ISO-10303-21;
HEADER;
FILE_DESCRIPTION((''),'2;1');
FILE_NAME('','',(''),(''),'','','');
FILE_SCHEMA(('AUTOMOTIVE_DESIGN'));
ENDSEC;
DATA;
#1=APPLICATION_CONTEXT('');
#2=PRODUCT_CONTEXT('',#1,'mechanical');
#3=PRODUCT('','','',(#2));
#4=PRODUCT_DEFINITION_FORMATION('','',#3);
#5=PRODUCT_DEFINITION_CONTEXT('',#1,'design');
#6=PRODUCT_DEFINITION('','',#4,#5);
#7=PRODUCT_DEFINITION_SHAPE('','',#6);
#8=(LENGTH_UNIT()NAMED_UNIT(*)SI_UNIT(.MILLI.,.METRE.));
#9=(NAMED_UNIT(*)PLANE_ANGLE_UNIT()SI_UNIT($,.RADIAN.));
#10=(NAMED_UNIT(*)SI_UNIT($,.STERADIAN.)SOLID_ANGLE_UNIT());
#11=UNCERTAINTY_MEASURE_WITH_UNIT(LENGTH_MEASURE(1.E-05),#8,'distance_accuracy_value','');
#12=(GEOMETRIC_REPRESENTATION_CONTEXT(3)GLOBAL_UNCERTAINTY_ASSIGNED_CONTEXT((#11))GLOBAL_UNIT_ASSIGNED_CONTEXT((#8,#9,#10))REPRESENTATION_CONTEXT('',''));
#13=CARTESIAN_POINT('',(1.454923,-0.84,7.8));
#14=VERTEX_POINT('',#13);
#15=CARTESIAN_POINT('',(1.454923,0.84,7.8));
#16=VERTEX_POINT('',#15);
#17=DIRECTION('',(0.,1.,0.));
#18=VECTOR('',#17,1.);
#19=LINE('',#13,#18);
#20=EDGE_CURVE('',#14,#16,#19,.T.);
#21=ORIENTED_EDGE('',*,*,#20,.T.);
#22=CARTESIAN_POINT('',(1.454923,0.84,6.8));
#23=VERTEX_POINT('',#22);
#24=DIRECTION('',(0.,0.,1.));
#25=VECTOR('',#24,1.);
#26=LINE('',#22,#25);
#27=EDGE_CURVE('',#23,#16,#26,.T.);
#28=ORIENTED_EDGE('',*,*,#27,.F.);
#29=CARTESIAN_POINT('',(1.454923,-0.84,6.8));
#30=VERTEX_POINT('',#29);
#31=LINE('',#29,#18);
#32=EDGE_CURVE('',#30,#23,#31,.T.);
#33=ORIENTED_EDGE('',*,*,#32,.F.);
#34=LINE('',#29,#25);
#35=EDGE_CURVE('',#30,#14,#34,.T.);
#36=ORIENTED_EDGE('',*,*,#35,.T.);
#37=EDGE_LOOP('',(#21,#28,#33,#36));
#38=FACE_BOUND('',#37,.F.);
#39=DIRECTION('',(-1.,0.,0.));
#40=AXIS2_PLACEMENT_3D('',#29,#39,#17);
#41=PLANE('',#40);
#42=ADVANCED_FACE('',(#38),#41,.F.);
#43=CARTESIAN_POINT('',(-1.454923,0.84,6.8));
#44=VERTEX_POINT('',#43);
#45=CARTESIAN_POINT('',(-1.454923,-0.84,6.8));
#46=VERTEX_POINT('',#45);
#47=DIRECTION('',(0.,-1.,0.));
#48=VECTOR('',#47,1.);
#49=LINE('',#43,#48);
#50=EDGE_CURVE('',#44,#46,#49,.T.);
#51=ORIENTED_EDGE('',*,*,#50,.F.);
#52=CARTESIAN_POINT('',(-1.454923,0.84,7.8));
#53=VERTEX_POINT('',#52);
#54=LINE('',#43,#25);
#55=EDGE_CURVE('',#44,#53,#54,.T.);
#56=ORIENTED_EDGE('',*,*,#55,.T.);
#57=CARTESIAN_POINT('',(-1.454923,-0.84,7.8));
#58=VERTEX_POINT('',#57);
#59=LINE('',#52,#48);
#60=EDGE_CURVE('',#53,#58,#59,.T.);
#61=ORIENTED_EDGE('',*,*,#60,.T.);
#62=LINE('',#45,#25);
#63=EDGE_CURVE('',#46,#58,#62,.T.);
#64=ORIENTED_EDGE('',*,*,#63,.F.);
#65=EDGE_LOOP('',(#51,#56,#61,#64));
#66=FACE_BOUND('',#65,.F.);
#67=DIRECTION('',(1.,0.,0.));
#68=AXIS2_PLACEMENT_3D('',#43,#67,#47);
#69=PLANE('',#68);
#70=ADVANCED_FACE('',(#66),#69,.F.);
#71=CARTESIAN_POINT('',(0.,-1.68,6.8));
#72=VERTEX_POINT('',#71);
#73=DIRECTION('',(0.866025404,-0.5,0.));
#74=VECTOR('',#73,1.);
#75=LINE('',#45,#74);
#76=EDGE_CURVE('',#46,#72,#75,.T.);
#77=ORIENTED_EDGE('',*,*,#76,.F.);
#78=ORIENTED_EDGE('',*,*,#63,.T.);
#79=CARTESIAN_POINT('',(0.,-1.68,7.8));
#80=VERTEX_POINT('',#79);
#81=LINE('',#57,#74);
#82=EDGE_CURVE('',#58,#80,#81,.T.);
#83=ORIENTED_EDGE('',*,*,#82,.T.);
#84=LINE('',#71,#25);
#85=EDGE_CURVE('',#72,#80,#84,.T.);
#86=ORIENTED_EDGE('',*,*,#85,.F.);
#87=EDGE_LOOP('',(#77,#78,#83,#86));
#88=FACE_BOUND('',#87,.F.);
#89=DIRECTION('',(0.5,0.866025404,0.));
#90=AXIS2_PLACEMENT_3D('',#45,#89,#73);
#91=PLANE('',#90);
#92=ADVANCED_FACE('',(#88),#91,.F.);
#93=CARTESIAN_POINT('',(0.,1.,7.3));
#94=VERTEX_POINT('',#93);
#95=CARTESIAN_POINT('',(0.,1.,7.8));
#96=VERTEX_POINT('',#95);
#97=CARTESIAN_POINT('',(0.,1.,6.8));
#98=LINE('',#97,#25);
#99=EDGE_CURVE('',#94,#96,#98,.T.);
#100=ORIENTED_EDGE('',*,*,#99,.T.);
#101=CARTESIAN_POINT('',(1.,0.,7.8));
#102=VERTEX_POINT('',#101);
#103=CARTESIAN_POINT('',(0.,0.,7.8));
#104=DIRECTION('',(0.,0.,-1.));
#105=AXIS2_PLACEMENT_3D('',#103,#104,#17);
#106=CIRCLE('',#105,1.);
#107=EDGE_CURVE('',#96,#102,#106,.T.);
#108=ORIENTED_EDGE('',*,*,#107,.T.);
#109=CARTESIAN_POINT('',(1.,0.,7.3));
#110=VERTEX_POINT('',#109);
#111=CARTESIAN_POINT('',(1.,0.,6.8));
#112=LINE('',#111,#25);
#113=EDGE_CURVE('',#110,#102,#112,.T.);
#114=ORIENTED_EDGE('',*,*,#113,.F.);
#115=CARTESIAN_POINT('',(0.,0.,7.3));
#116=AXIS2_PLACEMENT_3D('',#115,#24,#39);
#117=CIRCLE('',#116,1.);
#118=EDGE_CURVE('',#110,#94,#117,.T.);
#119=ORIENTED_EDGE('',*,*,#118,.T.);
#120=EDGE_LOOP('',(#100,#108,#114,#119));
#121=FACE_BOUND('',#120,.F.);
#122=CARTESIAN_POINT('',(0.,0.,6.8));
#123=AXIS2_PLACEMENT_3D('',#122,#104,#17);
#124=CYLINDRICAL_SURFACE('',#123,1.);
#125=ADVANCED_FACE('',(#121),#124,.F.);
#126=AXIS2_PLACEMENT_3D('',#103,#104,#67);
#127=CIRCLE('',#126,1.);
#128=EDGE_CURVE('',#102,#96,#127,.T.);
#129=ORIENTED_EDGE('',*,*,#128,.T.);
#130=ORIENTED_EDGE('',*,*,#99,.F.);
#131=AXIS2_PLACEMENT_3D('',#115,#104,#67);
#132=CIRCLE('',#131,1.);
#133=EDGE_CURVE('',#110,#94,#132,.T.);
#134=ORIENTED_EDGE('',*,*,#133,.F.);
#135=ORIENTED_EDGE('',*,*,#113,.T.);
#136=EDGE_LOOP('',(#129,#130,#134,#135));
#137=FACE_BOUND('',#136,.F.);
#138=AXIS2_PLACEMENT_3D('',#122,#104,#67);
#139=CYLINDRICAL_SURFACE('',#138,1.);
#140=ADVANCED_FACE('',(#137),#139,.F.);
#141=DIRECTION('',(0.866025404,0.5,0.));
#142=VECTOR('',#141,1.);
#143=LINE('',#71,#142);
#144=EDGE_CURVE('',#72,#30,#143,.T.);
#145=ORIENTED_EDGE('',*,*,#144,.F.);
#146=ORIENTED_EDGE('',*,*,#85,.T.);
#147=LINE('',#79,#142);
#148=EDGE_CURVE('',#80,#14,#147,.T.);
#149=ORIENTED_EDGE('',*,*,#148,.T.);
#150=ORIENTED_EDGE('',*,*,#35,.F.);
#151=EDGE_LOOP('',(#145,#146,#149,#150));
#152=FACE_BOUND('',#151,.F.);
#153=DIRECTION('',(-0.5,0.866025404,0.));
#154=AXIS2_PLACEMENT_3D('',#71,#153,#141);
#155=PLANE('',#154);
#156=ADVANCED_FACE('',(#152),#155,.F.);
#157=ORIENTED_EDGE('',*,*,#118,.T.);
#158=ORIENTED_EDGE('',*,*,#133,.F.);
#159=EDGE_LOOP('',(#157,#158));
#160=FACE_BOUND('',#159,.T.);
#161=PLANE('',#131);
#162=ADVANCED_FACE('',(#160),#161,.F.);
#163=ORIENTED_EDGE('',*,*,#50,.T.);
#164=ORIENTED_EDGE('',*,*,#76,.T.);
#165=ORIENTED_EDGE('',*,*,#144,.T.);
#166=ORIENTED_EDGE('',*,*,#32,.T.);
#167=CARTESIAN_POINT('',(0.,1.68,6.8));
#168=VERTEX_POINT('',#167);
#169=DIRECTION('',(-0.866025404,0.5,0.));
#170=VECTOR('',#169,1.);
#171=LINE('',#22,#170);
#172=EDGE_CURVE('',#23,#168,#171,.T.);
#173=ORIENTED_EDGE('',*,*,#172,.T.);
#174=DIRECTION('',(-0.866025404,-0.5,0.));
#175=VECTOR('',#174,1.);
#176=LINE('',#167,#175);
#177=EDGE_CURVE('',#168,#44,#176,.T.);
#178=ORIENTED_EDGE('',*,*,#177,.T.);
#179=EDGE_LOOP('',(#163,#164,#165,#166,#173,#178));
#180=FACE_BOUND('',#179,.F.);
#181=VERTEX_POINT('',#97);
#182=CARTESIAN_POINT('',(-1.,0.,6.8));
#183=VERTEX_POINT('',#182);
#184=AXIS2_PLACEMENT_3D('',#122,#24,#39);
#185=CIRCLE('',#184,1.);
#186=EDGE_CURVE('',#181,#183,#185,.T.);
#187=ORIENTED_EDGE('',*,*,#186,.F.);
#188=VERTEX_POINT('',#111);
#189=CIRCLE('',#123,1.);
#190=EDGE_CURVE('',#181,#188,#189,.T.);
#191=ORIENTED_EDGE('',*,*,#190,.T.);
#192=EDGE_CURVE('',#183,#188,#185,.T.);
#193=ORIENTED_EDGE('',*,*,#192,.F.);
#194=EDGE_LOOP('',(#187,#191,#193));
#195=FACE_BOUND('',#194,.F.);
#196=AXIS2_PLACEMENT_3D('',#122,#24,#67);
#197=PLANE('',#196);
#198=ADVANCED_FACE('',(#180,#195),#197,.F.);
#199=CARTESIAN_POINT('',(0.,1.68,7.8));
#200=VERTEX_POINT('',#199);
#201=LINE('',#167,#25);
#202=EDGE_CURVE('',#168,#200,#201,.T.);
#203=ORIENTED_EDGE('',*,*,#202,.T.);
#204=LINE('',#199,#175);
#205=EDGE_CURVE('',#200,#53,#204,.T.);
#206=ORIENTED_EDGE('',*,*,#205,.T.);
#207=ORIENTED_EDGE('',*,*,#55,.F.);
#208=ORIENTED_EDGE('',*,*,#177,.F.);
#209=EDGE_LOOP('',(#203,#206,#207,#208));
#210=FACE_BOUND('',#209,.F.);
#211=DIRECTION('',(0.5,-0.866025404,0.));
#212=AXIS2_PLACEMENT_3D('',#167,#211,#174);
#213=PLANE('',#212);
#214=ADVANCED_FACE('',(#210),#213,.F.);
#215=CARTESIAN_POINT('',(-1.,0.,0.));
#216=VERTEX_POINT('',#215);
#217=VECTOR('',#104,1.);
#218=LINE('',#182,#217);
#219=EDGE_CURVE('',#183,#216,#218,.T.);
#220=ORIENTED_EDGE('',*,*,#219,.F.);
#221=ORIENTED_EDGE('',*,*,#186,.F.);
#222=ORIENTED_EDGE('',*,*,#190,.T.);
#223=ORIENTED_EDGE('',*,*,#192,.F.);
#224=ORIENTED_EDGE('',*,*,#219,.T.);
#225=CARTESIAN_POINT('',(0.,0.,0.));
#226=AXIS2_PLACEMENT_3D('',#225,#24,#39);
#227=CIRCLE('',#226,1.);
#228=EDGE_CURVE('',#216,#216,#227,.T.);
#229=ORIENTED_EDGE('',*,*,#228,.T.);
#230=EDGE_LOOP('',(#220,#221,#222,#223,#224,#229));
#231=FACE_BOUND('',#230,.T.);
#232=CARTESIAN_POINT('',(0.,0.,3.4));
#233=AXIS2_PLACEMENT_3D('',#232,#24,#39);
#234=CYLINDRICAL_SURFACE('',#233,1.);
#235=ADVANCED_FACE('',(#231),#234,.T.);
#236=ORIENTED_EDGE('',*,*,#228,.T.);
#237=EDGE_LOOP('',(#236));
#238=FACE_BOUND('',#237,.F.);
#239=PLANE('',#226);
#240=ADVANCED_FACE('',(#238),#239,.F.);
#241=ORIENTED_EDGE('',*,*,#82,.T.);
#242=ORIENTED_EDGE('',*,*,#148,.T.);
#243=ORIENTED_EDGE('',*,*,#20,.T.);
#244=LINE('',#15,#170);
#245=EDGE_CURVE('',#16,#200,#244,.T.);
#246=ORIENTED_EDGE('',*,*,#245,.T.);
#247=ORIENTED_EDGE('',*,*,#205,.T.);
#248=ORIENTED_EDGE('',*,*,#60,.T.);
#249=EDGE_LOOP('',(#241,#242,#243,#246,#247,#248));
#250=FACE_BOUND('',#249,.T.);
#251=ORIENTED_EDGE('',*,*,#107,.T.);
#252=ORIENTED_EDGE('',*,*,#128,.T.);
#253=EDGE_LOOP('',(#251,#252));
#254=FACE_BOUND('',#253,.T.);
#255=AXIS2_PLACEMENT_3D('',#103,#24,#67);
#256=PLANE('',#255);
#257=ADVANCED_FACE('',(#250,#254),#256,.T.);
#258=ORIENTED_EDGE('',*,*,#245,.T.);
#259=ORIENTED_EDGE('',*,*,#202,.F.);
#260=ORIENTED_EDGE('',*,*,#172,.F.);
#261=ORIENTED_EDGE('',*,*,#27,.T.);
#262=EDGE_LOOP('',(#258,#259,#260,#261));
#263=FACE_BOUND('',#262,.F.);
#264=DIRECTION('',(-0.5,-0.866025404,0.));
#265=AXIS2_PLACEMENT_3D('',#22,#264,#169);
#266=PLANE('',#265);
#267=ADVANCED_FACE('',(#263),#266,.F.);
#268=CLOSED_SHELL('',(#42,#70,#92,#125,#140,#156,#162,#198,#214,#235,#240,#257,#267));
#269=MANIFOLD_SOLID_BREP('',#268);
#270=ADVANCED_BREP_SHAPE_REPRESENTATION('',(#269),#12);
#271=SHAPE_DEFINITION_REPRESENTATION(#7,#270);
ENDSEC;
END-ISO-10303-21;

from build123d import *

# Parameters (mm, degrees)
F0_W     = 1
F0_H     = 6.8
F3_DEPTH = 1
F4_R     = 1
F5_DEPTH = 0.5


# Not quite as in the source:
# - a pattern or mirror of a feature is missing from the dataset's text; its kind, count and spacing are read off the source's solid


with BuildPart() as f1:
    # F0 (on Front) → F1 (revolve)
    with BuildSketch(Plane.XZ):
        with Locations((-0.5, 3.4)):
            Rectangle(F0_W, F0_H)
    revolve(axis=Axis((0, 0, 3.4), (0, 0, 1)))

    # F1_copies: F1 across plane


with BuildPart() as f1_1:
    add(f1.part)
    add(f1.part.mirror(Plane.XY.offset(3.65)))

    # F2 (on face) → F3 (join)
    with BuildSketch(Plane.XY.offset(6.8)):
        Polygon((1.4549226784, 0.84), (0, 1.68), (-1.4549226784, 0.84), (-1.4549226784, -0.84), (0, -1.68), (1.4549226784, -0.84), align=None)
        with BuildLine():
            ThreePointArc((1, 0), (-0.7071067812, -0.7071067812), (0, 1))
            ThreePointArc((0, 1), (0.7071067812, 0.7071067812), (1, 0))
        make_face(mode=Mode.SUBTRACT)
    extrude(amount=F3_DEPTH)

    # F4 (on face) → F5 (cut)
    with BuildSketch(Plane.XY.offset(7.8)):
        Circle(F4_R)
    extrude(amount=-F5_DEPTH, mode=Mode.SUBTRACT)


solid = f1_1.part
